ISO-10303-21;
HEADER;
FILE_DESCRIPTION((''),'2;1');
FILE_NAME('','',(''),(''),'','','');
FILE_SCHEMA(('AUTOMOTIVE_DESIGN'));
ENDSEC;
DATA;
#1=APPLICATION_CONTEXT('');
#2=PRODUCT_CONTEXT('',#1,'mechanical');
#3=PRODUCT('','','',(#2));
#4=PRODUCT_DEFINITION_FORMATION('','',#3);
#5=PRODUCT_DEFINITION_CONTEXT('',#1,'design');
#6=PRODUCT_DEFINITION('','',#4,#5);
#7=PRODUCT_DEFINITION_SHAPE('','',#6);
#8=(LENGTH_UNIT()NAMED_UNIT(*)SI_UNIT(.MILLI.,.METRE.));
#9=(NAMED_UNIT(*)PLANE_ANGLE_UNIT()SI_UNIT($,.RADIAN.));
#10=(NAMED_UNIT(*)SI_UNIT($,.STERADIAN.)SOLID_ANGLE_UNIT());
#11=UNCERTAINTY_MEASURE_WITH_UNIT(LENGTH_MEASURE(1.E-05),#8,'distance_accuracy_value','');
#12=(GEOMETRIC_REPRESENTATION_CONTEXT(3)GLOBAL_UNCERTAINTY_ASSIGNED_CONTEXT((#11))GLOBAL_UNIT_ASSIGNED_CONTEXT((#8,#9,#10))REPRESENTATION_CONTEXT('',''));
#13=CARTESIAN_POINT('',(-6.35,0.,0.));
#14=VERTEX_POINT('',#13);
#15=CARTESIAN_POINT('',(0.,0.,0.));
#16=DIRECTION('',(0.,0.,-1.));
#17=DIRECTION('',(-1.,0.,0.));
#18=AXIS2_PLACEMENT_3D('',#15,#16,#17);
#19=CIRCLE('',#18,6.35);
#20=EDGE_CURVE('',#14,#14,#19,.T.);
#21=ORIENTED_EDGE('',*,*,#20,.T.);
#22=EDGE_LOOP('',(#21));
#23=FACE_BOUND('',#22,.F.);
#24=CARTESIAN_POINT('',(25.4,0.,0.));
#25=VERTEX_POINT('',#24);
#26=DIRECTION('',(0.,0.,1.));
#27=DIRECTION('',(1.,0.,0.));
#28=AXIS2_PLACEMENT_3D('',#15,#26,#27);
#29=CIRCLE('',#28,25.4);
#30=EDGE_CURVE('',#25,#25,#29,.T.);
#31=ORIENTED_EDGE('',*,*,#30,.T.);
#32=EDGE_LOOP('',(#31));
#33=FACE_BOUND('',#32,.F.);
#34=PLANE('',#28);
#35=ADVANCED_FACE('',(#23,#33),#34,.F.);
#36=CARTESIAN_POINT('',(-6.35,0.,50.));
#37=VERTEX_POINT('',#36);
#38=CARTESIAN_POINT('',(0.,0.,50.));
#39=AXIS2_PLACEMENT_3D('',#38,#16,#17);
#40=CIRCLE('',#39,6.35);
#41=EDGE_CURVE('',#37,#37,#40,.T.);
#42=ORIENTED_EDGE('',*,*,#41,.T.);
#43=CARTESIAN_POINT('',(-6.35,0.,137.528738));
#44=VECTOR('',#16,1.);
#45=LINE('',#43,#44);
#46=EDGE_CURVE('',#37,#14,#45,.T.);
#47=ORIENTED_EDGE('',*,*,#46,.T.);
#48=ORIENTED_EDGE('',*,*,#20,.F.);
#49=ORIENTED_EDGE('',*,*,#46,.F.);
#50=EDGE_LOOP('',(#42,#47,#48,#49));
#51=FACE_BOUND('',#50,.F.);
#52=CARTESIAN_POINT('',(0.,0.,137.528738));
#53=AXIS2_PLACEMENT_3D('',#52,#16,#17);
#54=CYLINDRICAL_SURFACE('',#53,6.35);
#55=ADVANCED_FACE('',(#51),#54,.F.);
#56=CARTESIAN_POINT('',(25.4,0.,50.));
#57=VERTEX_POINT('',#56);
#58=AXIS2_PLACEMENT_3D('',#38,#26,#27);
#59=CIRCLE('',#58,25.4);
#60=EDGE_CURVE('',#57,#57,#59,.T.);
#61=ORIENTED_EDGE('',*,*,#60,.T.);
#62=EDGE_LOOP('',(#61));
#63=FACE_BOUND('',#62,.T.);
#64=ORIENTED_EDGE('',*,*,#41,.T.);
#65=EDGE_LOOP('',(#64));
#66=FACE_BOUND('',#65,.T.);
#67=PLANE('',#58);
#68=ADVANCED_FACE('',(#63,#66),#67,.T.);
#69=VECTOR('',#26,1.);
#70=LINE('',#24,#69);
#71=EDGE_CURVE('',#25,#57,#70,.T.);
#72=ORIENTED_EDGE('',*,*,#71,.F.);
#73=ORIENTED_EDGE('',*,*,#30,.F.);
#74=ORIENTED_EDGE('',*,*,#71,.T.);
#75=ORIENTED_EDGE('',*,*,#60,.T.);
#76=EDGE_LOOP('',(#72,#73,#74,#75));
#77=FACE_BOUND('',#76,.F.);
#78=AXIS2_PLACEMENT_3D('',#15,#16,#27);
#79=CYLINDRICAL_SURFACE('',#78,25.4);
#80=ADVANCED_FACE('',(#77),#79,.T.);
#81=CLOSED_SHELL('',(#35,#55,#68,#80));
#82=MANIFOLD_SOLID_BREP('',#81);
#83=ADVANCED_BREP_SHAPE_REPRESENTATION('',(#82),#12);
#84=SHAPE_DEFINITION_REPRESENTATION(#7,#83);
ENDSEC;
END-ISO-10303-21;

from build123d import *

# Parameters (mm, degrees)
F0_R     = 25.4
F1_DEPTH = 50
F3_D     = 12.7


# Not quite as in the source:
# - a length typed as a fraction of an inch, garbled in the dataset ("3 / 203.2 mm" for 3/8 in), is restored


with BuildPart() as f1:
    # F0 (on Top) → F1 (new body)
    with BuildSketch(Plane.XY):
        Circle(F0_R)
    extrude(amount=F1_DEPTH)

    # F3 (through all)
    with Locations(Plane.XY.offset(50)):
        with Locations((0, 0)):
            Hole(F3_D / 2)


solid = f1.part
